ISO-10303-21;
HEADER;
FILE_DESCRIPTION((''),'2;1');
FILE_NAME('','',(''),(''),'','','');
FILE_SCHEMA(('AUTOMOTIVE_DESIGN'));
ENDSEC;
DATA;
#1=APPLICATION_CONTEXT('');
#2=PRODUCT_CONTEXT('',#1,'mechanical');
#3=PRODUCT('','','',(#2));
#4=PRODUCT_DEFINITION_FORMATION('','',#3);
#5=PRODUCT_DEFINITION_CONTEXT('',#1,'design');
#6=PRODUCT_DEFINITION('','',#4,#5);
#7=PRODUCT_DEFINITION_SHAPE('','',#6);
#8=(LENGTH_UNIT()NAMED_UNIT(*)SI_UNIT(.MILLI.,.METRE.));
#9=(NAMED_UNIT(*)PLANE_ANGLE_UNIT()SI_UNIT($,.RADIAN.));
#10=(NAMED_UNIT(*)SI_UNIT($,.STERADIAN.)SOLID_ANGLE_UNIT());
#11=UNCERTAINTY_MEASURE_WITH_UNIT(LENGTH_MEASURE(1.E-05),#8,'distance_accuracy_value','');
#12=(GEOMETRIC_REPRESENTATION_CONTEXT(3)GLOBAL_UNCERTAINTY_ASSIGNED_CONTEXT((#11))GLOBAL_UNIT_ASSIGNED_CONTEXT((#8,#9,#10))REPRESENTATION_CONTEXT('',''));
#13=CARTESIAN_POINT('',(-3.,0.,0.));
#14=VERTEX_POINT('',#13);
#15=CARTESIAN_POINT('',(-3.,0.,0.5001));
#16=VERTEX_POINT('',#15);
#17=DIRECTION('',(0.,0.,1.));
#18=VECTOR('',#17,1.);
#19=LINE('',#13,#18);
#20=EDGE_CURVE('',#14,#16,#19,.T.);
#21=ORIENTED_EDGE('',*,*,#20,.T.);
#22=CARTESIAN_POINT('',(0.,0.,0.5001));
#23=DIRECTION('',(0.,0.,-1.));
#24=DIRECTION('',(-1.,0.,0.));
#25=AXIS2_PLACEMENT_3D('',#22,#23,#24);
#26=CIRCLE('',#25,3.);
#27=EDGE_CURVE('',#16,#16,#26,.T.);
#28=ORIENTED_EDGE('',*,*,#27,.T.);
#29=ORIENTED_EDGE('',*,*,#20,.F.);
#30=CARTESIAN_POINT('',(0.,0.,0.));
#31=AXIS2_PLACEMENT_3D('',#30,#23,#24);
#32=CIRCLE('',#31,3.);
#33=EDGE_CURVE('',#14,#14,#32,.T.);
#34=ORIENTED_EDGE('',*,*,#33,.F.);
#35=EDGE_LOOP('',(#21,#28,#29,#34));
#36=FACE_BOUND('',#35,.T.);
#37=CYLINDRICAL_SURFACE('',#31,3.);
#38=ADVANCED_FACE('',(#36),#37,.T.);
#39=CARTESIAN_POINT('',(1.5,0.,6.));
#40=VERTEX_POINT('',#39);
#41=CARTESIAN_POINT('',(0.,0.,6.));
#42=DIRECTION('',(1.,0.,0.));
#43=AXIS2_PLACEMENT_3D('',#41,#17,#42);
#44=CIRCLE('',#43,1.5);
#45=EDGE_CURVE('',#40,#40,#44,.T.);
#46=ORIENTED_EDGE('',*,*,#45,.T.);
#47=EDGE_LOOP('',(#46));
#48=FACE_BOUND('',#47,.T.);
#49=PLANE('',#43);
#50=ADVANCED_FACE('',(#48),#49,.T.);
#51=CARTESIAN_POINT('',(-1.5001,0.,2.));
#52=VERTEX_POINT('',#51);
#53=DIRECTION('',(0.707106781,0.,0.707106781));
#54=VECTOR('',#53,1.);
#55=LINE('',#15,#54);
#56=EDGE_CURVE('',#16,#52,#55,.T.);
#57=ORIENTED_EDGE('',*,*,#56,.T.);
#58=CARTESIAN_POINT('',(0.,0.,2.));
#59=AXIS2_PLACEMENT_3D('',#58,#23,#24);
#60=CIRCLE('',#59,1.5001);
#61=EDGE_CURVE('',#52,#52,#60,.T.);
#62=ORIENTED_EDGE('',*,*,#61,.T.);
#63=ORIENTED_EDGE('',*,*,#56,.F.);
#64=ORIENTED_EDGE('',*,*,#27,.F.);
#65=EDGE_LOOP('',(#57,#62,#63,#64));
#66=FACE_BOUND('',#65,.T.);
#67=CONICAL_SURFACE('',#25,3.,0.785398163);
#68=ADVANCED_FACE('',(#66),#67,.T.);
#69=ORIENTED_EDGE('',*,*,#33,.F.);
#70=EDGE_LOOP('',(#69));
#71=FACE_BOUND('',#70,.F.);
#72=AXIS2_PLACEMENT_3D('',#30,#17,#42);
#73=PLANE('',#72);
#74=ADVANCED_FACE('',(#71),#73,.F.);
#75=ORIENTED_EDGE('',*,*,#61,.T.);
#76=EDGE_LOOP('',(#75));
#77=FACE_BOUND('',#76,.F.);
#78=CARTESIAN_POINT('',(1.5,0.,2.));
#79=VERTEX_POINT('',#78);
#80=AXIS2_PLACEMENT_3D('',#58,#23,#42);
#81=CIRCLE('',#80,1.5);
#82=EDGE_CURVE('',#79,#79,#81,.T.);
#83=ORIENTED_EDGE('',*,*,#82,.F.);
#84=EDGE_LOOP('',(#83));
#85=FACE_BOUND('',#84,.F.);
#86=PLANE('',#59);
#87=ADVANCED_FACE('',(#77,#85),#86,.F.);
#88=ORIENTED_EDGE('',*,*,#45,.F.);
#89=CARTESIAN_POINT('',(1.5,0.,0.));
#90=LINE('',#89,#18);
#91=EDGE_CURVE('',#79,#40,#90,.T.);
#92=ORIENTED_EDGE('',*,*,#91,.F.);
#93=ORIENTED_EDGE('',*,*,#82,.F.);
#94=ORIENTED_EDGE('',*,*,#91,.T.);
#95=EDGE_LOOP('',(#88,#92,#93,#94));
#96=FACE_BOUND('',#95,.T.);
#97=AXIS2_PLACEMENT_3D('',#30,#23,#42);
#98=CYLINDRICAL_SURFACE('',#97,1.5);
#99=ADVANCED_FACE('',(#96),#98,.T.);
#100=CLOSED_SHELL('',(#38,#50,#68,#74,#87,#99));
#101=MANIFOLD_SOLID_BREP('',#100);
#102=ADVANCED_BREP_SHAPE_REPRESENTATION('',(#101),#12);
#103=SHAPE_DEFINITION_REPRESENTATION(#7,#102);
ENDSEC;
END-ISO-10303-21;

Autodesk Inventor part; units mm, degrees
ref_plane "YZ Plane" through (0, 0, 0) normal (1, 0, 0) x (0, 1, 0)
ref_plane "XZ Plane" through (0, 0, 0) normal (0, 1, 0) x (-1, 0, 0)
ref_plane "XY Plane" through (0, 0, 0) normal (0, 0, 1) x (1, 0, 0)
sketch "スケッチ1" plane through (0, 0, 0) normal (0, 0, 1) x (1, 0, 0)
  circle A0 centre (0, 0) radius 1.5
  dimension "d0" = 3
extrude "押し出し1" add sketch "スケッチ1" along normal blind 6
sketch "スケッチ2" plane through (0, 0, 0) normal (0, 0, -1) x (-1, 0, 0)
  circle A0 centre (0, 0) radius 3
  dimension "d3" = 6
extrude "押し出し2" add sketch "スケッチ2" against normal blind 2
thread "ねじ1" size "M3x0.5" class "6g" standard "ANSI Metric M Profile" full length
chamfer "面取り1" distance 1.5 angle 45 1 edges at (3, 0, 2)
properties part number "ネジ皿m3,06" material "鋼、高強度、低合金"
